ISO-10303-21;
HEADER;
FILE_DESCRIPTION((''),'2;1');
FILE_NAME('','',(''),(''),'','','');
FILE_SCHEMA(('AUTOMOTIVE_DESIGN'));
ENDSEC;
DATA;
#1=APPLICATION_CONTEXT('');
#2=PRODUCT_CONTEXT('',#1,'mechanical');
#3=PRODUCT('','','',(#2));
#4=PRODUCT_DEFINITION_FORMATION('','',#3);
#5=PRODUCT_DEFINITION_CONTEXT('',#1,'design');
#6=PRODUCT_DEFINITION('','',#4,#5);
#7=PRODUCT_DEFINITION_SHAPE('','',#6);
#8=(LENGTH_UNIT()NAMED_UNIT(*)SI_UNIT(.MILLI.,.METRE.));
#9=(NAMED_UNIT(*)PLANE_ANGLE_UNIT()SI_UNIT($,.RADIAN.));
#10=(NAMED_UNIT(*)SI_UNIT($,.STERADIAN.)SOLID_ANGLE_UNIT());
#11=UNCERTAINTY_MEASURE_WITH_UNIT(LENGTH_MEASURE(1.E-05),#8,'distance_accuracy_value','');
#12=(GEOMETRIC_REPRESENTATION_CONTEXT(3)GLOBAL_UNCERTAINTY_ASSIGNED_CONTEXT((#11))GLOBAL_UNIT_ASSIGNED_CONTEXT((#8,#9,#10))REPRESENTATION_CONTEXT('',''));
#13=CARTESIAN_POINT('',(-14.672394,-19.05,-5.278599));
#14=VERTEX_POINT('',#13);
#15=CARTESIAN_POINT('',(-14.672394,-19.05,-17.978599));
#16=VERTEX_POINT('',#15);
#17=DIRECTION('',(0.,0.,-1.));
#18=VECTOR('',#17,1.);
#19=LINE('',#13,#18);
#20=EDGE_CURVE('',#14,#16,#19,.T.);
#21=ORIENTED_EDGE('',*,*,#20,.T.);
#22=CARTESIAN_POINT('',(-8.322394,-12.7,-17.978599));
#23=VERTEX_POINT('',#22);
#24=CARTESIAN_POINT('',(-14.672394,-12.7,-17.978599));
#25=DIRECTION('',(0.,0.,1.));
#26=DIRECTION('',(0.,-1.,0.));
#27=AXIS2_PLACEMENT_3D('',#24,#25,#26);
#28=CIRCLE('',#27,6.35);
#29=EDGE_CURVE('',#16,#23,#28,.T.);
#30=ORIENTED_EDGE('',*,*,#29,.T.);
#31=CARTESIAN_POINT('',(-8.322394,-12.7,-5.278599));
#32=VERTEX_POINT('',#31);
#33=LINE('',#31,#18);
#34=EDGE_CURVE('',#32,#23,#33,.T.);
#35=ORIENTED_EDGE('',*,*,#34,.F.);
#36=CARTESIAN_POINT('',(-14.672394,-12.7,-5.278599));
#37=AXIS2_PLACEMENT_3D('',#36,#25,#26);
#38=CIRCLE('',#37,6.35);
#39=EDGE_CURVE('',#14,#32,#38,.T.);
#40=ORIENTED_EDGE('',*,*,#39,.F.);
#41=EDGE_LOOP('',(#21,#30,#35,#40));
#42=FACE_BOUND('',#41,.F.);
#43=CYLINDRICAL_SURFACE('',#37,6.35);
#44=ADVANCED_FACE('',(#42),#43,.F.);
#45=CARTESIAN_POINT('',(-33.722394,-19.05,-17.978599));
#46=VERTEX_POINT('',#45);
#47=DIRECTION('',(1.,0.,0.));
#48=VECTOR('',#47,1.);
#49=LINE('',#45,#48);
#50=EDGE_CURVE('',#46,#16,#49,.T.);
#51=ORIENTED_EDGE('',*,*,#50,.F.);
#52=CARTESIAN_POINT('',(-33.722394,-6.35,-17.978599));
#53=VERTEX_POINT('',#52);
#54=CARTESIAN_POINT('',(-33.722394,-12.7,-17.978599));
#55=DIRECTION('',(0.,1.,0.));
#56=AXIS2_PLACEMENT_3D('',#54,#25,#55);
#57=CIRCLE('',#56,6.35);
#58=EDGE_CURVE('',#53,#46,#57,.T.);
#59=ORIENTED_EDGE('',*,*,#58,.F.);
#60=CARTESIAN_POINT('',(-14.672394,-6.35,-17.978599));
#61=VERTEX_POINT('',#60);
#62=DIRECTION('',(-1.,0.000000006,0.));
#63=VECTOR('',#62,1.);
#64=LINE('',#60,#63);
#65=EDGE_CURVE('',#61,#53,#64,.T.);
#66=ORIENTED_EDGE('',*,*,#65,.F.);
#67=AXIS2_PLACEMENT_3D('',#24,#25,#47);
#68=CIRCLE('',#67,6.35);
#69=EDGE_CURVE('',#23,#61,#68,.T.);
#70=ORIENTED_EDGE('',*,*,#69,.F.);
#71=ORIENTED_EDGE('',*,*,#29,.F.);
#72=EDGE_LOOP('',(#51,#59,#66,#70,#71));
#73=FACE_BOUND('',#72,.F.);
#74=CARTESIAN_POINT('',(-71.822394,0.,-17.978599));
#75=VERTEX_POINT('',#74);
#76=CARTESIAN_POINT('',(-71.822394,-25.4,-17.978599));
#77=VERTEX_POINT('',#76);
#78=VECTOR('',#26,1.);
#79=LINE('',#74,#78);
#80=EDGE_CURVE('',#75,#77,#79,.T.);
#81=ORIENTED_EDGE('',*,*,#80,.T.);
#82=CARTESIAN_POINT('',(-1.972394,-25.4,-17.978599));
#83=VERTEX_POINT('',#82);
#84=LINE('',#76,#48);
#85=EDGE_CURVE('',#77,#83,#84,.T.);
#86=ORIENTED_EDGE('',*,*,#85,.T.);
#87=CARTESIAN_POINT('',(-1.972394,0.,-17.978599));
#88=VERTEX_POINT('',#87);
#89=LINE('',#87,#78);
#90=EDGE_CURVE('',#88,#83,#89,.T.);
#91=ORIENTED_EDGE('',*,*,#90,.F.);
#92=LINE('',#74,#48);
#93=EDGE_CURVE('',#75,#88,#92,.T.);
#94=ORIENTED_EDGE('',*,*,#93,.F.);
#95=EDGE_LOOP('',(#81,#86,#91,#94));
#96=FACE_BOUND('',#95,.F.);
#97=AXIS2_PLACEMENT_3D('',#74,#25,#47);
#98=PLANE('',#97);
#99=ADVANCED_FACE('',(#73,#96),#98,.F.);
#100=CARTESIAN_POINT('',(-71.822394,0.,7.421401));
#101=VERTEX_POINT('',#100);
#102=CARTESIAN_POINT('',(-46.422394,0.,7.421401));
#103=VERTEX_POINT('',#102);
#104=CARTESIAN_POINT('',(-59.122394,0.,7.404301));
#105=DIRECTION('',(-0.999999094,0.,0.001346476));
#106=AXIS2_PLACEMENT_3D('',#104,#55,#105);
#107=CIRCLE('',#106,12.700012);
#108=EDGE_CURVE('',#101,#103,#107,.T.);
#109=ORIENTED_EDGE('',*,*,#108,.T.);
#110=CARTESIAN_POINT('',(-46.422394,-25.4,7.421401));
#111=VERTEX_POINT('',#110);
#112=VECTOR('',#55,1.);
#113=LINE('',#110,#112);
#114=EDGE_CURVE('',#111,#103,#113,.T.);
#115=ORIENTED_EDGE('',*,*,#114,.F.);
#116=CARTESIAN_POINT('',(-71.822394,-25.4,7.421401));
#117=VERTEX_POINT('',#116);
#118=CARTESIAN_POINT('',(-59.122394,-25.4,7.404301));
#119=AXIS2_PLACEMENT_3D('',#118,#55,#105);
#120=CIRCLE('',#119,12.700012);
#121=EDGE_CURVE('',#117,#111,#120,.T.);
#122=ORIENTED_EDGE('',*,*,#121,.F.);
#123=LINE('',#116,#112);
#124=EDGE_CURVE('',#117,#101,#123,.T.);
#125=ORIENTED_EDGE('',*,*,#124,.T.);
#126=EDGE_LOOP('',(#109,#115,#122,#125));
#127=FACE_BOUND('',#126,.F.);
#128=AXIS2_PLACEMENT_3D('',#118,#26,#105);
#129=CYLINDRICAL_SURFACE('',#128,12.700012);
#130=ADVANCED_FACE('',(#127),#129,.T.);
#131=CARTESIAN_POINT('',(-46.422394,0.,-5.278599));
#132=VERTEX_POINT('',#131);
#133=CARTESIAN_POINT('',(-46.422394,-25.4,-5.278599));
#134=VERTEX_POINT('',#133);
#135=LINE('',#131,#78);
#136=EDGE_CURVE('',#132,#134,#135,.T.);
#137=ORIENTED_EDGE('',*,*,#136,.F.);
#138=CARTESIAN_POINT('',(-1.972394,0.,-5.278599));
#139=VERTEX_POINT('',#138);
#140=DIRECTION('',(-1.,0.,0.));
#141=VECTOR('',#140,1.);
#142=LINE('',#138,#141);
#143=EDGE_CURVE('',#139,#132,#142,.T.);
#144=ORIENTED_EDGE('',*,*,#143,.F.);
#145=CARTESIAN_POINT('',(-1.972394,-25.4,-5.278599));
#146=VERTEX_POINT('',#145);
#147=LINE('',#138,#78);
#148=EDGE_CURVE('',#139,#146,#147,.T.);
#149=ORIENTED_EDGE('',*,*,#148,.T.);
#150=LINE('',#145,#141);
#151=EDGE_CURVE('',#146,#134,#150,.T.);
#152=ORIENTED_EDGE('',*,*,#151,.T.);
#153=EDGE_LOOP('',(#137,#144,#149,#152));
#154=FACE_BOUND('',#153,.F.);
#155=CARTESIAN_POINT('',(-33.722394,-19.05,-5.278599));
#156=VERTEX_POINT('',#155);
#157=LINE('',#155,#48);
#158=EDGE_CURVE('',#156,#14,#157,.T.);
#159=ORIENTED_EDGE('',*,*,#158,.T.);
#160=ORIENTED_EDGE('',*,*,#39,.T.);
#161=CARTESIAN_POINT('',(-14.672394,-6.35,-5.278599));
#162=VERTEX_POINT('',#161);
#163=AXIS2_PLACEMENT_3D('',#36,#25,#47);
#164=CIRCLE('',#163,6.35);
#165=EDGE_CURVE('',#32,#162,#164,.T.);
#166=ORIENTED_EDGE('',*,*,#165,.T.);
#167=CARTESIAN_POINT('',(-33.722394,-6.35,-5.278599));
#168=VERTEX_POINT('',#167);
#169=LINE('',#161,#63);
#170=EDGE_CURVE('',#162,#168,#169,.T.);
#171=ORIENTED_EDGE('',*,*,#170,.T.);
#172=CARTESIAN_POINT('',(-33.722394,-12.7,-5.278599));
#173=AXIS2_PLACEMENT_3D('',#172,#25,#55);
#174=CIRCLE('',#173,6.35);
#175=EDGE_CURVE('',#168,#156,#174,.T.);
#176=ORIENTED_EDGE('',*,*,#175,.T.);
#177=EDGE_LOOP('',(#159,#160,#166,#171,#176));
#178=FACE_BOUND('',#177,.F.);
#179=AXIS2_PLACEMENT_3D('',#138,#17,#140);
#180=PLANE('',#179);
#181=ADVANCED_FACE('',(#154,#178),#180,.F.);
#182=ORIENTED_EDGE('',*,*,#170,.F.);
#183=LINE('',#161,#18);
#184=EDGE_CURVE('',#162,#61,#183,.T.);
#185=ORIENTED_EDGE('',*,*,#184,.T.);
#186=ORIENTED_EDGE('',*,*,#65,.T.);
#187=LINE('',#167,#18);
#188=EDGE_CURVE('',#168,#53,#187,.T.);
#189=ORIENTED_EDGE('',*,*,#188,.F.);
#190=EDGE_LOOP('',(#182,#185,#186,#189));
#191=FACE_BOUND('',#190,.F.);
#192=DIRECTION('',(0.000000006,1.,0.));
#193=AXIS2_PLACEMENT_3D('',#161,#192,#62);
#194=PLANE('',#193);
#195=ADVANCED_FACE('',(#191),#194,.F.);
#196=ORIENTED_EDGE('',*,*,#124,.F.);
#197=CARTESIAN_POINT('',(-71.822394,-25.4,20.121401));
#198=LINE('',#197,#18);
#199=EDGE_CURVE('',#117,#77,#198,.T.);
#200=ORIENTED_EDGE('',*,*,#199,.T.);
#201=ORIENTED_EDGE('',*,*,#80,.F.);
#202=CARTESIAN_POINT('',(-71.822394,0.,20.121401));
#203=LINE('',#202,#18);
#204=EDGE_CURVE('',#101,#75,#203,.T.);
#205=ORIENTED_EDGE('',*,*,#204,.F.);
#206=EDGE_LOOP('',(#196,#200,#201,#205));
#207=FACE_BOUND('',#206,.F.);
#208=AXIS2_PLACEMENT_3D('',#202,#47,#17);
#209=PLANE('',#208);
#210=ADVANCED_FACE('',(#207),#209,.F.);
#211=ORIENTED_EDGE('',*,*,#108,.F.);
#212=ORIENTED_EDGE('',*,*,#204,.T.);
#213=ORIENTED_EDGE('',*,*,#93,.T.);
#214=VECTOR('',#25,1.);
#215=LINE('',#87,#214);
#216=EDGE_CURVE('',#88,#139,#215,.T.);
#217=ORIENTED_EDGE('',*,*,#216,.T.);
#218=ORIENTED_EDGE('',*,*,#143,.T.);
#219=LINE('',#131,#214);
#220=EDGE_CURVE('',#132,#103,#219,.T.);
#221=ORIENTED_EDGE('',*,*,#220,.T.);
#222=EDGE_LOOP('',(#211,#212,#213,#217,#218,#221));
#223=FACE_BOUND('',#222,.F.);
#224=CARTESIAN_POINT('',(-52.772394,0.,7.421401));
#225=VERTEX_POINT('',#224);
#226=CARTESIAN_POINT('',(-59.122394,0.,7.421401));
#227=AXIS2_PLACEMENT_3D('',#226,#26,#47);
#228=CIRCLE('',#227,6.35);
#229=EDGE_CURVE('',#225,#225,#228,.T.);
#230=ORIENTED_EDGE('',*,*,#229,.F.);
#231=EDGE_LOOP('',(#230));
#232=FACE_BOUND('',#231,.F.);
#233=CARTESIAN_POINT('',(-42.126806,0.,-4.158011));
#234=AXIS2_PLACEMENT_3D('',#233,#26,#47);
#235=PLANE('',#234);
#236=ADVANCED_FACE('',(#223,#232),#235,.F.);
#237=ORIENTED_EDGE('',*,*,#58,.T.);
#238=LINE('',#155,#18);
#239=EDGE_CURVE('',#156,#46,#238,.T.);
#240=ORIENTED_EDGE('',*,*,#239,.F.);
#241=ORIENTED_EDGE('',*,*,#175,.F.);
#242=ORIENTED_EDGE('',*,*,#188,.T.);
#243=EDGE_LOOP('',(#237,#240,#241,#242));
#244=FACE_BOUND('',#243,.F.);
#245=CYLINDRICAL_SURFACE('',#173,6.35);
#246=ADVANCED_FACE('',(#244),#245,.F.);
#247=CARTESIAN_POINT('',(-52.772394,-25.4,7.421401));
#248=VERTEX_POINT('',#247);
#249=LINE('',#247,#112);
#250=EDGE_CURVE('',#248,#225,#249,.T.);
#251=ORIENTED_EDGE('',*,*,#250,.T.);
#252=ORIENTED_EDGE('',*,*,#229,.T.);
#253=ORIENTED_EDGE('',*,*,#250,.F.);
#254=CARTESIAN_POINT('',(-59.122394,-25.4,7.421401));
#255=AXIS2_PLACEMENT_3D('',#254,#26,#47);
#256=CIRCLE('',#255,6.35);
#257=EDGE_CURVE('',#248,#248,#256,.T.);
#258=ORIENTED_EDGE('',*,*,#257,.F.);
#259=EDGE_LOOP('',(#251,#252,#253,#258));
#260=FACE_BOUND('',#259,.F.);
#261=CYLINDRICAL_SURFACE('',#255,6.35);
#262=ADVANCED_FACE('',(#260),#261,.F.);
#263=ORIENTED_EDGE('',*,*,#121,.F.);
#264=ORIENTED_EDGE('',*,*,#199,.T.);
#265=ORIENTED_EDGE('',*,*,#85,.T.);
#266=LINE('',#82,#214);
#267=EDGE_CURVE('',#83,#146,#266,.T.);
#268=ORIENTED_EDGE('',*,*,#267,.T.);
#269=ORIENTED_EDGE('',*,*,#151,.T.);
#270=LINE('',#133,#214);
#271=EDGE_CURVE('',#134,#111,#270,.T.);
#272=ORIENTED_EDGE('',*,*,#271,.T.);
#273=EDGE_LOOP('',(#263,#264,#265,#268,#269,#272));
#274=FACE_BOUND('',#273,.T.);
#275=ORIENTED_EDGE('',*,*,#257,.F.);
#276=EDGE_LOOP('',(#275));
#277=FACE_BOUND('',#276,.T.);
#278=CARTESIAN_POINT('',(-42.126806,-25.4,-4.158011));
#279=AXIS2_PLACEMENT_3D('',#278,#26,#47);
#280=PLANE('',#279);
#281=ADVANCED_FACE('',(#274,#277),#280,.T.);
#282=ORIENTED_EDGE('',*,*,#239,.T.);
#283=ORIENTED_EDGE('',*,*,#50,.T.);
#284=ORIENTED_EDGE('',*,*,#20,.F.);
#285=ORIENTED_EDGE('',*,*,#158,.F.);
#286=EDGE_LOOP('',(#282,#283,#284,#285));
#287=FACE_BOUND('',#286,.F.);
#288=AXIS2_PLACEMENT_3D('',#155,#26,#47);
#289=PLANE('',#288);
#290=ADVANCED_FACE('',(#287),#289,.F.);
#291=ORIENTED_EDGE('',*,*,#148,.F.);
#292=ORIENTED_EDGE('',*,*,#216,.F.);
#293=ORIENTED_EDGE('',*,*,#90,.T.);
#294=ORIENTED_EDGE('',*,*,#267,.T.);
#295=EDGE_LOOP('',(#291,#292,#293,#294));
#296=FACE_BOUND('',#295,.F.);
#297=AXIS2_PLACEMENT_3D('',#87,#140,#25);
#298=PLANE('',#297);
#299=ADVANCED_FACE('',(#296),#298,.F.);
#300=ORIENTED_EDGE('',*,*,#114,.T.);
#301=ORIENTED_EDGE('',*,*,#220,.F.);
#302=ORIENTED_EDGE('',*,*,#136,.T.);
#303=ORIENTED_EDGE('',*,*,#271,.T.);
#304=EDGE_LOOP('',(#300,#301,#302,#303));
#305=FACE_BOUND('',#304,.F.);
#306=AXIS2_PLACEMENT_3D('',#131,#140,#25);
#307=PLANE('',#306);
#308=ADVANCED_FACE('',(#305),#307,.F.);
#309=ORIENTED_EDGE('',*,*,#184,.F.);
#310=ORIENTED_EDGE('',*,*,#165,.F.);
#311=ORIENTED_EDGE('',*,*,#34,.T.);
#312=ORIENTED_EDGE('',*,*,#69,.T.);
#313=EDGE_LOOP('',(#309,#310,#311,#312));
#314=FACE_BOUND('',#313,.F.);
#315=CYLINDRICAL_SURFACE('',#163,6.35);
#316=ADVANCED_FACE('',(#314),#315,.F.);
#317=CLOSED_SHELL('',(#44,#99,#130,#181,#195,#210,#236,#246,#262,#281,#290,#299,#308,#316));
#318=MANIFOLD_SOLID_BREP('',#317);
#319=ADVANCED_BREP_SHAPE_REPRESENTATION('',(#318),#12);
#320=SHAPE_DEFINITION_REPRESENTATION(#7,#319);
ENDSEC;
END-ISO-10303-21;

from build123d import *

# Parameters (mm, degrees)
F1_DEPTH = 25.4
F4_DEPTH = 12.7
F2_R     = 6.35
F5_DEPTH = 25.4


# Not quite as in the source:
# - ends of sketch curves that miss each other by under 0.0002 mm in the source are joined


with BuildPart() as f1:
    # F0 (on Front) → F1 (new body)
    with BuildSketch(Plane.XZ):
        Polygon((-46.4223937518, 20.1214007731), (-71.8223937518, 20.1214007731), (-71.8223937518, -17.9785992269), (-1.9723937518, -17.9785992269), (-1.9723937518, -5.2785992269), (-46.4223937518, -5.2785992269), align=None)
    extrude(amount=F1_DEPTH)

    # F3 (on face) → F4 (cut)
    with BuildSketch(Plane.XY.offset(-5.2785992269)):
        with BuildLine():
            ThreePointArc((-8.3223937518, -12.6999999235), (-10.1822656913, -8.2098718629), (-14.6723937518, -6.3499999235))
            ThreePointArc((-14.6723937518, -6.3499999235), (-21.0223937518, -12.6999999235), (-14.6723937518, -19.0499999235))
            ThreePointArc((-14.6723937518, -19.0499999235), (-10.1822656913, -17.190127984), (-8.3223937518, -12.6999999235))
        make_face()
        with BuildLine():
            ThreePointArc((-33.7223937518, -6.3499998086), (-29.2322656913, -8.2098717481), (-27.3723937518, -12.6999998086))
            ThreePointArc((-27.3723937518, -12.6999998086), (-29.2322656913, -17.1901278692), (-33.7223937518, -19.0499998086))
            Line((-33.7223937518, -19.0499998086), (-14.6723937518, -19.0499998086))
            ThreePointArc((-14.6723937518, -19.0499998086), (-21.0223937518, -12.6999999235), (-14.6723937518, -6.3499999235))
            Line((-14.6723937518, -6.3499999235), (-33.7223937518, -6.3499998086))
        make_face()
        with BuildLine():
            ThreePointArc((-33.7223937518, -19.0499998086), (-29.2322656913, -17.1901278692), (-27.3723937518, -12.6999998086))
            ThreePointArc((-27.3723937518, -12.6999998086), (-29.2322656913, -8.2098717481), (-33.7223937518, -6.3499998086))
            ThreePointArc((-33.7223937518, -6.3499998086), (-40.0723937518, -12.6999998086), (-33.7223937518, -19.0499998086))
        make_face()
    extrude(amount=-F4_DEPTH, mode=Mode.SUBTRACT)

    # F2 (on face) → F5 (cut)
    with BuildSketch(Plane.XZ.offset(25.4)):
        with Locations((-59.1223937518, 7.4214007731)):
            Circle(F2_R)
        with BuildLine():
            ThreePointArc((-71.8223937518, 7.4214007731), (-59.1223937518, 20.1043120223), (-46.4223937518, 7.4214007731))
            Line((-46.4223937518, 7.4214007731), (-46.4223937518, 20.1214007731))
            Line((-46.4223937518, 20.1214007731), (-71.8223937518, 20.1214007731))
            Line((-71.8223937518, 20.1214007731), (-71.8223937518, 7.4214007731))
        make_face()
    extrude(amount=-F5_DEPTH, mode=Mode.SUBTRACT)


solid = f1.part
